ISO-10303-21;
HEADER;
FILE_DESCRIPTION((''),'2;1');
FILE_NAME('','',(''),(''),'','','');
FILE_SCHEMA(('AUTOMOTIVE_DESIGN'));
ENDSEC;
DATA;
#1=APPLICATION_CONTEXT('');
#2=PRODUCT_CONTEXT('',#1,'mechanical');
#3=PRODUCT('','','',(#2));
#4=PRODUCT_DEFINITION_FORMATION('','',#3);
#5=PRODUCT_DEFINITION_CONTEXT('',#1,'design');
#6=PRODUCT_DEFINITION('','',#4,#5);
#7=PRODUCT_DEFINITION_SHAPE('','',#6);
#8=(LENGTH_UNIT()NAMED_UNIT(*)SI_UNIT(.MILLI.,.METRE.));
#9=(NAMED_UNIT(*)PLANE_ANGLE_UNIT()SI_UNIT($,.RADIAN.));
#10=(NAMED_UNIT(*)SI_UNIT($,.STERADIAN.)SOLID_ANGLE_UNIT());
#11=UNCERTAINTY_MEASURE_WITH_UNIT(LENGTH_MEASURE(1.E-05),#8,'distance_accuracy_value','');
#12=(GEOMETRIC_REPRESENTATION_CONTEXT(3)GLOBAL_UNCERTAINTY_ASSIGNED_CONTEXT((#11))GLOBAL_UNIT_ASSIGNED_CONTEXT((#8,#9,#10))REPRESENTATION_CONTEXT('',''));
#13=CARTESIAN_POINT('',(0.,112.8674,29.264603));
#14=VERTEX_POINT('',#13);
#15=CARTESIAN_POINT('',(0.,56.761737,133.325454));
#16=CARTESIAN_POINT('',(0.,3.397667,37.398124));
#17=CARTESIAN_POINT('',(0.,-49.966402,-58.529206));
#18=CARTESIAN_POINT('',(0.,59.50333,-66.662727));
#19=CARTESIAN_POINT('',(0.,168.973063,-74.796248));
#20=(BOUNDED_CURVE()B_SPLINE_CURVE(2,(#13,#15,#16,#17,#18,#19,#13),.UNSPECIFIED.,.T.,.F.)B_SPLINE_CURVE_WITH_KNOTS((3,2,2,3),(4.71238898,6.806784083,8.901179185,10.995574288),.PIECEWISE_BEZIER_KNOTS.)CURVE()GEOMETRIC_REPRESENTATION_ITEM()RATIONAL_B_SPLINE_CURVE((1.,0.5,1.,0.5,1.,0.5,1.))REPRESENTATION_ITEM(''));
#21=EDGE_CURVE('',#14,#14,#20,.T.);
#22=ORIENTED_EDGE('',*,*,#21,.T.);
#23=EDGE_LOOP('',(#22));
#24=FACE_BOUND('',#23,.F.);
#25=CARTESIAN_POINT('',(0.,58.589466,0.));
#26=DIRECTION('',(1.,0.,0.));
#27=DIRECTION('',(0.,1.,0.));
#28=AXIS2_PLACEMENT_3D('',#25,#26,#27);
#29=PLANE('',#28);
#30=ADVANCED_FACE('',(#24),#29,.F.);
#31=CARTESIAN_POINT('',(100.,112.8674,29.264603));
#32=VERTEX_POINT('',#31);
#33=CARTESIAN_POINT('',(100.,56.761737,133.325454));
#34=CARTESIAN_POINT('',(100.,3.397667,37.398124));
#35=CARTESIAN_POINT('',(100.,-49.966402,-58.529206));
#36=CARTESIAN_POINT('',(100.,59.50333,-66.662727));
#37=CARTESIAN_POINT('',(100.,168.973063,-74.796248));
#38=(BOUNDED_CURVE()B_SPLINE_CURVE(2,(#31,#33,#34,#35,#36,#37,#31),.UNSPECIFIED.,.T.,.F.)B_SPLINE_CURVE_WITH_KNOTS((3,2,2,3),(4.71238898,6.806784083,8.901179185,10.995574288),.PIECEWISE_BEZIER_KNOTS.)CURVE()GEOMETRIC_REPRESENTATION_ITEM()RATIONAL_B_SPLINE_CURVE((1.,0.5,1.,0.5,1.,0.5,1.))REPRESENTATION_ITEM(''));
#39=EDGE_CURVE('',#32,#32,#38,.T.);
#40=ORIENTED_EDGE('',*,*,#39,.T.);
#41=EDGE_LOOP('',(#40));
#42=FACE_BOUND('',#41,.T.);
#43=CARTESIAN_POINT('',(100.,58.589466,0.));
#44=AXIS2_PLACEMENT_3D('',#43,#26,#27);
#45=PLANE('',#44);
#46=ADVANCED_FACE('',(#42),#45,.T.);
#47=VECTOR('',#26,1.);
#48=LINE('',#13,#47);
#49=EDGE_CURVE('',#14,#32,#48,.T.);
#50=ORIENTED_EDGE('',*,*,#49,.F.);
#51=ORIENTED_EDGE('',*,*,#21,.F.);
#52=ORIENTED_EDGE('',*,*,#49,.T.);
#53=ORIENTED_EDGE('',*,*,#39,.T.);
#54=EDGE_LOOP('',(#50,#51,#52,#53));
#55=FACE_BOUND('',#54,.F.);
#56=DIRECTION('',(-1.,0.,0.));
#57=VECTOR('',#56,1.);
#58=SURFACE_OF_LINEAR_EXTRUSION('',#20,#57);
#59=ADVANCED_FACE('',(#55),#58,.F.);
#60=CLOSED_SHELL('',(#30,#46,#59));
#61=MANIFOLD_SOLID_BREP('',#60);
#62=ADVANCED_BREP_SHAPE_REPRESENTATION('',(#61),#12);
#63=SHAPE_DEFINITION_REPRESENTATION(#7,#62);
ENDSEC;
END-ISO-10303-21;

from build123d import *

# Parameters (mm, degrees)
F3_DEPTH = 100


# Not quite as in the source:
# - the program builds the solid bodies; features that only make, move or delete a surface that nothing else refers to are left out


with BuildPart() as f3:
    # F2 (on Right) → F3 (new body)
    with BuildSketch(Plane.YZ):
        with BuildLine():
            add(Edge.make_bspline(
                [(112.8674000502, 29.2646028101), (56.761737081, 133.3254540352), (3.3976673646, 37.3981242075), (-49.9664023519, -58.5292056203), (59.5033303338, -66.6627270176), (168.9730630194, -74.7962484149), (112.8674000502, 29.2646028101)],
                knots=[4.7123889804, 4.7123889804, 4.7123889804, 6.8067840828, 6.8067840828, 8.9011791852, 8.9011791852, 10.9955742876, 10.9955742876, 10.9955742876], degree=2, weights=[1, 0.5, 1, 0.5, 1, 0.5, 1]))
        make_face()
    extrude(amount=F3_DEPTH)


solid = f3.part
